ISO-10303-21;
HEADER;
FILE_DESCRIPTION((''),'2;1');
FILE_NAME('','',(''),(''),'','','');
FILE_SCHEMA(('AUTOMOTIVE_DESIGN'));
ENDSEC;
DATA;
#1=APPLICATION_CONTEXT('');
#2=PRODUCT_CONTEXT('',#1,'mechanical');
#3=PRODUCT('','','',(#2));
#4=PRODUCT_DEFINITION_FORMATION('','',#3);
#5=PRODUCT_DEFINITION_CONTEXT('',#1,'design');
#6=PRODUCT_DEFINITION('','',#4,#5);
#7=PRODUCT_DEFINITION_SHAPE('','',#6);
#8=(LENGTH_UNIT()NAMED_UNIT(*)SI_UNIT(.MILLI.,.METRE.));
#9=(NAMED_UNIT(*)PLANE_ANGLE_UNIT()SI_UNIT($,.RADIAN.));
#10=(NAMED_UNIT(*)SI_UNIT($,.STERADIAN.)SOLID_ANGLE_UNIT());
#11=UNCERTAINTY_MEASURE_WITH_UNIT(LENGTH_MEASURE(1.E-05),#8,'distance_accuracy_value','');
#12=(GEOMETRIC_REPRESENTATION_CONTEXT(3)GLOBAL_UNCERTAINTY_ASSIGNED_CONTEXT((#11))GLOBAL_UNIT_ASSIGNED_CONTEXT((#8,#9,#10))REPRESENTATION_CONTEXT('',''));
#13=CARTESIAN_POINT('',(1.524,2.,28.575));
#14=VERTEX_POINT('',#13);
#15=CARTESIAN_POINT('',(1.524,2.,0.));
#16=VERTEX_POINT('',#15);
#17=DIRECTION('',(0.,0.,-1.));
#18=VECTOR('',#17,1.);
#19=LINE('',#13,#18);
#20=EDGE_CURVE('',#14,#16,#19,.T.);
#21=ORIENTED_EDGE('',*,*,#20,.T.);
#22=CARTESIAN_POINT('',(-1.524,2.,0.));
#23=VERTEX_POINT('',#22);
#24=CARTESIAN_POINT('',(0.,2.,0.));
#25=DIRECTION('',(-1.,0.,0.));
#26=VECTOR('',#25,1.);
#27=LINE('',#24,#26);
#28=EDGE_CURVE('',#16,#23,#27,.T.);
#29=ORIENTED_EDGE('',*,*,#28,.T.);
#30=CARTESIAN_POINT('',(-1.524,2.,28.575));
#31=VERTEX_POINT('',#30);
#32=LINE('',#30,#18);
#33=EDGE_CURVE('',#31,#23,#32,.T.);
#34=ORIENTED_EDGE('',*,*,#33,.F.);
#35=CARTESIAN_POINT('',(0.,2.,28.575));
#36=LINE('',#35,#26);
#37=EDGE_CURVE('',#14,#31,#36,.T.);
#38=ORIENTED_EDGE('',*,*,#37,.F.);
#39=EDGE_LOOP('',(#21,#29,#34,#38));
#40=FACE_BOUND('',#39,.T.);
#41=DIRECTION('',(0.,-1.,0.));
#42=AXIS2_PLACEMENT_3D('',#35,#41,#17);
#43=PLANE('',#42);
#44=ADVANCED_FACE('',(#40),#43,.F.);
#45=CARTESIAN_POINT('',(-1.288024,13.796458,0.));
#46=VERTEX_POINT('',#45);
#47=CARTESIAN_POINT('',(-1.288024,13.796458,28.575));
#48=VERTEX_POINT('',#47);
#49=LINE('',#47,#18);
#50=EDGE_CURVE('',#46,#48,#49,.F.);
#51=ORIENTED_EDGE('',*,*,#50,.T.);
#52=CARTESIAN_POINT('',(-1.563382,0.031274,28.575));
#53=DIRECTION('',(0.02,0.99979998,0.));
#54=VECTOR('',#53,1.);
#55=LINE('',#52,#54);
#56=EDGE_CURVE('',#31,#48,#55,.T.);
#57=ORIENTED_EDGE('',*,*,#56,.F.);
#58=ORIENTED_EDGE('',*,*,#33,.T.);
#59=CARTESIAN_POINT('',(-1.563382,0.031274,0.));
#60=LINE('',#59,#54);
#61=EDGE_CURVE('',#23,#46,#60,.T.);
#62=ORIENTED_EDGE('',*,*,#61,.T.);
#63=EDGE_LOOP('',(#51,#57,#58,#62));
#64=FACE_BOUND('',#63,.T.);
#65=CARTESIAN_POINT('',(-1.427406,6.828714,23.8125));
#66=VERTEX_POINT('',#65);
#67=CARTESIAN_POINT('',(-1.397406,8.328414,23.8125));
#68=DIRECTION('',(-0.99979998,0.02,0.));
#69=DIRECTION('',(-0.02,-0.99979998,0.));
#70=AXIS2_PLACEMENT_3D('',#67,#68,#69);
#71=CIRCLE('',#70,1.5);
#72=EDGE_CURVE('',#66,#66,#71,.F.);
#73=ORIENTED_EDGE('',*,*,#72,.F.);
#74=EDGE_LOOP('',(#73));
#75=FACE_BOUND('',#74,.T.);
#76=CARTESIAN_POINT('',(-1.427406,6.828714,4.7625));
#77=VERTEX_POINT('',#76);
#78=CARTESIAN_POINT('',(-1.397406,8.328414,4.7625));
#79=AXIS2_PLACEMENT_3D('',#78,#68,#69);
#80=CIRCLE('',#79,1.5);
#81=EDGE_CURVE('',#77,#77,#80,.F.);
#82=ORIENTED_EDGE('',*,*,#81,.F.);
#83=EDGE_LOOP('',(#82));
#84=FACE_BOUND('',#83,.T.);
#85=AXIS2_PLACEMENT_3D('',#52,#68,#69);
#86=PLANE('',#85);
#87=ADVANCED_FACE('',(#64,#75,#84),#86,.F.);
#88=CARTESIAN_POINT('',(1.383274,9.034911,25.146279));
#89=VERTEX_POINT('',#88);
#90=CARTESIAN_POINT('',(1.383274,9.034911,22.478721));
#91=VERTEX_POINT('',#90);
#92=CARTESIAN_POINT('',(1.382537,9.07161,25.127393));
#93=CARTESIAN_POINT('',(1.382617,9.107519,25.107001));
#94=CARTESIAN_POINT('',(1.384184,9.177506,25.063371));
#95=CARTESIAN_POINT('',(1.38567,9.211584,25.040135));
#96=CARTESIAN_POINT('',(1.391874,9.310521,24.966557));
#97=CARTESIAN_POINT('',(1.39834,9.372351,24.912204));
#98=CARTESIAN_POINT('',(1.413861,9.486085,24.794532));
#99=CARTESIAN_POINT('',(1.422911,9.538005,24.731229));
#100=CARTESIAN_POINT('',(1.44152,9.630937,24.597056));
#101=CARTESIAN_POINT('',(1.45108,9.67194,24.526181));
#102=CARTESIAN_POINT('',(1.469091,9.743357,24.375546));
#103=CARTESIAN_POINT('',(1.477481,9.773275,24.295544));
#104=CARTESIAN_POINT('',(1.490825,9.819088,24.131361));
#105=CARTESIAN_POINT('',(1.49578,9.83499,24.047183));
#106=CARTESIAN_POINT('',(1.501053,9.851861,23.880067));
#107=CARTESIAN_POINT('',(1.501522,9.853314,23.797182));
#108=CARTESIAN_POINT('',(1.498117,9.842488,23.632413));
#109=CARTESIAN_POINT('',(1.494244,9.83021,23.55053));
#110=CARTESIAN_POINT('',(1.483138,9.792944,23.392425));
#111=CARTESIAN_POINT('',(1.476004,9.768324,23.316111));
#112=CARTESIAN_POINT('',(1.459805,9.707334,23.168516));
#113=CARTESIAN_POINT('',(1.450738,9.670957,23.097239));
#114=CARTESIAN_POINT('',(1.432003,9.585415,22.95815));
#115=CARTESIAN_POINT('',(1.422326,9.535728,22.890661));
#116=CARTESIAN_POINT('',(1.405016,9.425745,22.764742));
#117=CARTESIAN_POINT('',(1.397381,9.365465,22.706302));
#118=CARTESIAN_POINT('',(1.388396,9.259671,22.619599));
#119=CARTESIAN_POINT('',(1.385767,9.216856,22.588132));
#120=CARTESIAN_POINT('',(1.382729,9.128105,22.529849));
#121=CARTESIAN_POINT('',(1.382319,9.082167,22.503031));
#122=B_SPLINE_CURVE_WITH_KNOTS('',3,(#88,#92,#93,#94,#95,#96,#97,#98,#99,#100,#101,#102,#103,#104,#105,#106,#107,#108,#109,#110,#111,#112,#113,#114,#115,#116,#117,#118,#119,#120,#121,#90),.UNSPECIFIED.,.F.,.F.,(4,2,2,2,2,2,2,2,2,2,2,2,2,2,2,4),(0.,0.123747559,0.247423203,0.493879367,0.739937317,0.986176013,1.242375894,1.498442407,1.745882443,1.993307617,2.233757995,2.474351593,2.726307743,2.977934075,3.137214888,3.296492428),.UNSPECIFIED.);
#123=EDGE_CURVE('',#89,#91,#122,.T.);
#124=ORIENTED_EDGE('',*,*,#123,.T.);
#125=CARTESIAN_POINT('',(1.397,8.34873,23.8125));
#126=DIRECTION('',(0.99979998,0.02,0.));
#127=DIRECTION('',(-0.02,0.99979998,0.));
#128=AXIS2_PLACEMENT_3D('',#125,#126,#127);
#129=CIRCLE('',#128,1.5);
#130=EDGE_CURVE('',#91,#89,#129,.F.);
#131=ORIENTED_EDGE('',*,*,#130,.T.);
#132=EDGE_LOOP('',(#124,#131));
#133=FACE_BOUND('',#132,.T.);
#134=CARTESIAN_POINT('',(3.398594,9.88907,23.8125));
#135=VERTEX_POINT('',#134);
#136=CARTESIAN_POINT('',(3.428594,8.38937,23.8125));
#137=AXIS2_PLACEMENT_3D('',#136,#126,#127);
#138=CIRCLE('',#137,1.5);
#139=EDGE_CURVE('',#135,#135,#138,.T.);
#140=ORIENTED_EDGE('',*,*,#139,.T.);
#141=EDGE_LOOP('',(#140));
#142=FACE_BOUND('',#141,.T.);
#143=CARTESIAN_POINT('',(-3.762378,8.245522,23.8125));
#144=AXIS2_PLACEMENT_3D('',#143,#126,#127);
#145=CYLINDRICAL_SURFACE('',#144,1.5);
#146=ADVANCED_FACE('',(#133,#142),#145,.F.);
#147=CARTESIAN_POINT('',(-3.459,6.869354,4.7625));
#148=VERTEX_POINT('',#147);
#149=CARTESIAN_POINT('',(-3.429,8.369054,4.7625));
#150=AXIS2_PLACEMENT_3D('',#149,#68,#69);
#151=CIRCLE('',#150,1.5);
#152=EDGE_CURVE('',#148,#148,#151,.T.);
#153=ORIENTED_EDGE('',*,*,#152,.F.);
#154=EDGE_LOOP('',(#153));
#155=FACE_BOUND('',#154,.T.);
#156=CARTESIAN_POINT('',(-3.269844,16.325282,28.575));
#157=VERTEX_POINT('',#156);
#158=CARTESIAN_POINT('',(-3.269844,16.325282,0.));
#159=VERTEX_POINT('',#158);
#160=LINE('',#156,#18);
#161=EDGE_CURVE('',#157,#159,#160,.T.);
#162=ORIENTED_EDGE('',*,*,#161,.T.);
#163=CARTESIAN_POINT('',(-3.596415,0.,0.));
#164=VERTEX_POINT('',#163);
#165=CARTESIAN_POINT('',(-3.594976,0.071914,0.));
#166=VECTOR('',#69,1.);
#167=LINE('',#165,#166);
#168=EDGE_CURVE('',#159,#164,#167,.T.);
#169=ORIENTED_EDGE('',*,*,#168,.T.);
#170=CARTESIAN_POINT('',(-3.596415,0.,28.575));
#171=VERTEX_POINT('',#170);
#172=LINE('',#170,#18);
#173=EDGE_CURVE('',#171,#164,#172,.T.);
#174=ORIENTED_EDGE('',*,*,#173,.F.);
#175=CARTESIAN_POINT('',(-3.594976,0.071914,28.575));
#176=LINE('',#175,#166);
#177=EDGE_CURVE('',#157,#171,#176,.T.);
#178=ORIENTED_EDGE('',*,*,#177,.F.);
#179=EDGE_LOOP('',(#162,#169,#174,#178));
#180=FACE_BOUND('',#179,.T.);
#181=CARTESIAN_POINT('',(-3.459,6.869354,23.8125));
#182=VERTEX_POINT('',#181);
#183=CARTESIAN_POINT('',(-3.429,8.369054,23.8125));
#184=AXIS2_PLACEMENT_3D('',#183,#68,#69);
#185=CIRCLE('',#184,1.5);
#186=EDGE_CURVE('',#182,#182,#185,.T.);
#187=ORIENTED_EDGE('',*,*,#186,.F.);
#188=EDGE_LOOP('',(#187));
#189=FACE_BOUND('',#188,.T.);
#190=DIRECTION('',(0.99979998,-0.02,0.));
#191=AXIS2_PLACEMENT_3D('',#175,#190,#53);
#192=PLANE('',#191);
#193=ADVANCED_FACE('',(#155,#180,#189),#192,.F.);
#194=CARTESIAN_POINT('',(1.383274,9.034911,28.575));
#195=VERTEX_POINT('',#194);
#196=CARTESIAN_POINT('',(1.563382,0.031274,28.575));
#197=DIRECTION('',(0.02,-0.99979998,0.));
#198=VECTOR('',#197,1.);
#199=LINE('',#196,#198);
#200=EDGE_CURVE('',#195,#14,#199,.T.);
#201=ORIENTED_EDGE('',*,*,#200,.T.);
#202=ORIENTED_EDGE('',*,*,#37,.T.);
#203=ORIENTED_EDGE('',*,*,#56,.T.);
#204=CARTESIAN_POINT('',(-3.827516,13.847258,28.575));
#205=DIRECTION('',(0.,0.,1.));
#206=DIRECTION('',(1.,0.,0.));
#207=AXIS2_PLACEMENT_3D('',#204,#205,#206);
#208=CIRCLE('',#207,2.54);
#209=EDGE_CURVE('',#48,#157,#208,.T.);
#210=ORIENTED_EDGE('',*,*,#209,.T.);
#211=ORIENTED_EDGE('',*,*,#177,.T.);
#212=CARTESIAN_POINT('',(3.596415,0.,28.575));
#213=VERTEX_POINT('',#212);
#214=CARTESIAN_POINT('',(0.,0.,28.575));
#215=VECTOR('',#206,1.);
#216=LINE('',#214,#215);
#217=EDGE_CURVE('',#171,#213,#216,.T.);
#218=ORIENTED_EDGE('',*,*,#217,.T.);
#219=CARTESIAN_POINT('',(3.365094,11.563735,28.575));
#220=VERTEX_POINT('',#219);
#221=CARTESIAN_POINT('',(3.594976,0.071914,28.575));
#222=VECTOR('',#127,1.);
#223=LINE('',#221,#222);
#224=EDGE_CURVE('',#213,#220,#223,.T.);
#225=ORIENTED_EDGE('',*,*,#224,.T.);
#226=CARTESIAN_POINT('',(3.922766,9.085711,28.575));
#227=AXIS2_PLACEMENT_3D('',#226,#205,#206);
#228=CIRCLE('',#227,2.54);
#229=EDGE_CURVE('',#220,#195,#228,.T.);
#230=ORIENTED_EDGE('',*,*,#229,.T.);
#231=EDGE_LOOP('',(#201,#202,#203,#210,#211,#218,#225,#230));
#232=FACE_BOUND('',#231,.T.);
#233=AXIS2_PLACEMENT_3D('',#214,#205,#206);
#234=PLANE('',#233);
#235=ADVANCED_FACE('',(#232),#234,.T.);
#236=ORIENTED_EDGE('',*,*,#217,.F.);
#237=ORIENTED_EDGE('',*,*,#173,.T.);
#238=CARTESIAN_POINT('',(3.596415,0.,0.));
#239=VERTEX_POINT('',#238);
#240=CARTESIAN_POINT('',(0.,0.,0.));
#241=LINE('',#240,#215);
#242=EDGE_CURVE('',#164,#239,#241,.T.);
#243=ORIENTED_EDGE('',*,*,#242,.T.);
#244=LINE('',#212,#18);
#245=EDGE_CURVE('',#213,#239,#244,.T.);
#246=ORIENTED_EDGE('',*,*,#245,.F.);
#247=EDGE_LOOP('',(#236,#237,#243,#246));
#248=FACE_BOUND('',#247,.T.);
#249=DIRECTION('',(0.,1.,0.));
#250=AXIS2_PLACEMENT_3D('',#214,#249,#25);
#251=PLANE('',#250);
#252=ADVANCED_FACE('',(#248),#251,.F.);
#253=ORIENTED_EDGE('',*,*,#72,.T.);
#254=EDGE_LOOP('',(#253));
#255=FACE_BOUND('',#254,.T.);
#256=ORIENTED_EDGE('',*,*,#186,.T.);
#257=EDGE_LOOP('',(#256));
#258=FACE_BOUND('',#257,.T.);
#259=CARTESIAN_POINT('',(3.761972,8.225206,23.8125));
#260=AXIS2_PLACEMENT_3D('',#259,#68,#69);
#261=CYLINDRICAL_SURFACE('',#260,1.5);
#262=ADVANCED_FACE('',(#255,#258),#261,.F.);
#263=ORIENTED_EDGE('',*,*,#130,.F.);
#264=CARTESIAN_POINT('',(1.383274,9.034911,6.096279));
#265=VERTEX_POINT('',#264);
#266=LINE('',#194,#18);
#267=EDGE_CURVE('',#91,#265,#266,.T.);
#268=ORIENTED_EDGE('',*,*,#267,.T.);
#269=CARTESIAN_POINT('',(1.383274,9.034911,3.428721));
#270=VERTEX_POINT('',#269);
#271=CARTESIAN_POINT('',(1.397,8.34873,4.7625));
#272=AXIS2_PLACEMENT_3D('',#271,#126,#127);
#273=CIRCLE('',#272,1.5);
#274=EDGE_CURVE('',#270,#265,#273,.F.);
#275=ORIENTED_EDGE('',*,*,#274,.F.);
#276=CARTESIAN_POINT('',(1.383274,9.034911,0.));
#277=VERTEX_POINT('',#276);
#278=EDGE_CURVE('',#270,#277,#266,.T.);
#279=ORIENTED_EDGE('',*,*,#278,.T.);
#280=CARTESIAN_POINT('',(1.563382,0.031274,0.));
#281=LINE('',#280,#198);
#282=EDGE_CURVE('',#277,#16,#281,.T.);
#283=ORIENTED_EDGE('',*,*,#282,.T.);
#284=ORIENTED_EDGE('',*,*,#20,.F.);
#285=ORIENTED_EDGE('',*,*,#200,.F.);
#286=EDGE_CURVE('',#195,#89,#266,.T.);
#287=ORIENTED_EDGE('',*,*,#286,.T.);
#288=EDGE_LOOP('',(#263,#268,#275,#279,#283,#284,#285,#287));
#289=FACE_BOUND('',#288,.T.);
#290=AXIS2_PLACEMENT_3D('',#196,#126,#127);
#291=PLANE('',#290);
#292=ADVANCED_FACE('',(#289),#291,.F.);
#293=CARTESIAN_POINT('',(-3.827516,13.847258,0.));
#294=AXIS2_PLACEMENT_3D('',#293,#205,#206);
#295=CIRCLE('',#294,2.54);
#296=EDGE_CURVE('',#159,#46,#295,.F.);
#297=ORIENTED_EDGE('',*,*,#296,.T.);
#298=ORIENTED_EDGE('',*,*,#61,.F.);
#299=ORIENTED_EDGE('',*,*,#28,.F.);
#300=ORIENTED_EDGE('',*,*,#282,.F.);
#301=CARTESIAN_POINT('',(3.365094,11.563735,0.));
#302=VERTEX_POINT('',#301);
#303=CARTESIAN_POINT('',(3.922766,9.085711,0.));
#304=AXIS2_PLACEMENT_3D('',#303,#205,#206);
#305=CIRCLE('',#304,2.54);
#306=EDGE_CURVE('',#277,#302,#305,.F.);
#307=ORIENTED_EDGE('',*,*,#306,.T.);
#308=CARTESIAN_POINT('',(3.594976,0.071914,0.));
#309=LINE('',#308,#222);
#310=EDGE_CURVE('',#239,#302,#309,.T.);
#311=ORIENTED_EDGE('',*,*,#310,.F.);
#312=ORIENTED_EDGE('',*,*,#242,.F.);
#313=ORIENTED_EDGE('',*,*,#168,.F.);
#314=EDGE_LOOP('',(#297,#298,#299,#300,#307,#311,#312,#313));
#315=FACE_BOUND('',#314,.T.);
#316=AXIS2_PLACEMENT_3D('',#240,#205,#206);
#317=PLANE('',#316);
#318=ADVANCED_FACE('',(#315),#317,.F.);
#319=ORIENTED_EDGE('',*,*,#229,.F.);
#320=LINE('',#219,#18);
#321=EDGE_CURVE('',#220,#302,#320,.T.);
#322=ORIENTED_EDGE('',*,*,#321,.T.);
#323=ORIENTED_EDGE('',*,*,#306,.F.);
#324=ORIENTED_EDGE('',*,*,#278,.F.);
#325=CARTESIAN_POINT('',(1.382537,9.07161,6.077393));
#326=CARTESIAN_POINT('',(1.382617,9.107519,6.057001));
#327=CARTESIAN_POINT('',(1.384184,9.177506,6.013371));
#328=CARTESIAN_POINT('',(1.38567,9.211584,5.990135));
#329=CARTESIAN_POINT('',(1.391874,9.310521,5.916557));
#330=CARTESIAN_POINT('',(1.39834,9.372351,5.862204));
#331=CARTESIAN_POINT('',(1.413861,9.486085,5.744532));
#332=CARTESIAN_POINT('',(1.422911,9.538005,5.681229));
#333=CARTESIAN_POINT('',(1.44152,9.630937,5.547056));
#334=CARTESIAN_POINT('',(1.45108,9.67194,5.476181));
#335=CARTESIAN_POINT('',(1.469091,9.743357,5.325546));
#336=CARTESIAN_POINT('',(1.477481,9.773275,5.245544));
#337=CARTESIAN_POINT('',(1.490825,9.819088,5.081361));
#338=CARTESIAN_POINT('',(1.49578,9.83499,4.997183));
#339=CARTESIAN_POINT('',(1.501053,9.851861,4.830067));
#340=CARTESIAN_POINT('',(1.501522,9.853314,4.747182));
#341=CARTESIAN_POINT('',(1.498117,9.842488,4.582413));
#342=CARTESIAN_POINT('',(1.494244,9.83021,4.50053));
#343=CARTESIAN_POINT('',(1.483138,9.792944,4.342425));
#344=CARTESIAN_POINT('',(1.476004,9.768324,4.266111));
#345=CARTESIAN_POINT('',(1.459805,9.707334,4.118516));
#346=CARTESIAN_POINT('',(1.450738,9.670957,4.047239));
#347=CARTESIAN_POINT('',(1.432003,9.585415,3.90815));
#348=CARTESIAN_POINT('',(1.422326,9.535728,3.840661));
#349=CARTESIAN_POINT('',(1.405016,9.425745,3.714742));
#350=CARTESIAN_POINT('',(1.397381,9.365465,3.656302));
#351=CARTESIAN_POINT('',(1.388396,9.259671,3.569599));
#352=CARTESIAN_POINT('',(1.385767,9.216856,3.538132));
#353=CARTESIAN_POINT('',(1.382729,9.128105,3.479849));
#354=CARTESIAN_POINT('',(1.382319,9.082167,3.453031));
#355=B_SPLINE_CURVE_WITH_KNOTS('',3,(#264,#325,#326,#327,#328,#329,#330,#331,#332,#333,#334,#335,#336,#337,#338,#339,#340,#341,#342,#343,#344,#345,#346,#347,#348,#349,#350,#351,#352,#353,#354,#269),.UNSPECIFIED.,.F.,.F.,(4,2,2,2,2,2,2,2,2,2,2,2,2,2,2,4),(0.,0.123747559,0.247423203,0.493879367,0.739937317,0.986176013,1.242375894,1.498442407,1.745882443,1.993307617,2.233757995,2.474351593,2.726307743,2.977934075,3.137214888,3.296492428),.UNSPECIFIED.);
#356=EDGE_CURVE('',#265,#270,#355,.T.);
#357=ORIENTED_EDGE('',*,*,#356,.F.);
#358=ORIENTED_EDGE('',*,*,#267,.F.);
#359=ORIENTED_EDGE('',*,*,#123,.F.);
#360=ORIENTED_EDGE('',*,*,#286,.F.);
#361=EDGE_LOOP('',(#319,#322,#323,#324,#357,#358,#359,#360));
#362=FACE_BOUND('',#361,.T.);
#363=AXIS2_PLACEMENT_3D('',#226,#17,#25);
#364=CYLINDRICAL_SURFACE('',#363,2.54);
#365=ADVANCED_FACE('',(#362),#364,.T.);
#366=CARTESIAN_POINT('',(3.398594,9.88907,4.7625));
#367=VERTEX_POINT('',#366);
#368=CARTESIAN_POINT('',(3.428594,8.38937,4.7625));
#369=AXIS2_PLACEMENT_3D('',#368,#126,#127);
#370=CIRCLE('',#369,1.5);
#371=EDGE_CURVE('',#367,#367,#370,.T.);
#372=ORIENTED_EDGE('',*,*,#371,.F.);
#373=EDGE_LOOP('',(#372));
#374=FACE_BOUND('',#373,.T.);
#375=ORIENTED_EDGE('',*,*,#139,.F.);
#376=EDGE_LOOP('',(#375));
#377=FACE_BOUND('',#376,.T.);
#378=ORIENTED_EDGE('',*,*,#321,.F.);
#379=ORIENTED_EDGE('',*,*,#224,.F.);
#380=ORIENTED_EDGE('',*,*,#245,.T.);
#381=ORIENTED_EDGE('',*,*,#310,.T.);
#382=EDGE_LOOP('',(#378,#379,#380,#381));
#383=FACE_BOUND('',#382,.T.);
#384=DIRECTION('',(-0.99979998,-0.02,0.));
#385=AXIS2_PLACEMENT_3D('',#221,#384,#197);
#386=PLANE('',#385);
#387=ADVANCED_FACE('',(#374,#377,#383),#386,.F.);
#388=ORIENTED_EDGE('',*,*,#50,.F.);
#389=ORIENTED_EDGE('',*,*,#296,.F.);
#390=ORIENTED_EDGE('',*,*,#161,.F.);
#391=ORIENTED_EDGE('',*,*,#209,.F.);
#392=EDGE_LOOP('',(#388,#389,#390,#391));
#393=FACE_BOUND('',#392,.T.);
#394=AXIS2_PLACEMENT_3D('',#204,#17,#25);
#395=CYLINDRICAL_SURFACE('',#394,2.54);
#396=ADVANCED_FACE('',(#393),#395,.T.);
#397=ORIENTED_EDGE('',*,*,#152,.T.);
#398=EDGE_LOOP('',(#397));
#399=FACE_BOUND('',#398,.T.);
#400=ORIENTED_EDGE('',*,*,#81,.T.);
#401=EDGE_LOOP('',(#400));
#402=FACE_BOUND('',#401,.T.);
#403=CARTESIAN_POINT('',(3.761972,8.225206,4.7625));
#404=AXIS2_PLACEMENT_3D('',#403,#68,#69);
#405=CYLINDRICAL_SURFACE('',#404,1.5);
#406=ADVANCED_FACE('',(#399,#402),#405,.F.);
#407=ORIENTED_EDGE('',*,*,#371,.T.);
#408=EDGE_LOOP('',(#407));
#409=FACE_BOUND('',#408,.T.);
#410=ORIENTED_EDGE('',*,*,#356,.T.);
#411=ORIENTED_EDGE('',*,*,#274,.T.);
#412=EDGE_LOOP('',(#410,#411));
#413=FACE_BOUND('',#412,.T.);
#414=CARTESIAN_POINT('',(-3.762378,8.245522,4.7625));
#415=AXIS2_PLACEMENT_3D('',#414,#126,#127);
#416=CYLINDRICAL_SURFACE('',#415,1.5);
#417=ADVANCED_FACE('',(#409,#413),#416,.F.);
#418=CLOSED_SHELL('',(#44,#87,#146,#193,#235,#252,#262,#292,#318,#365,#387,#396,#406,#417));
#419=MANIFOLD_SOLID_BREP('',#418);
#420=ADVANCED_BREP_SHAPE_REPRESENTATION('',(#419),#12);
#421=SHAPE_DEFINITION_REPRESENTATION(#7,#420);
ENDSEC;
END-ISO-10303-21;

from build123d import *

# Parameters (mm, degrees)
BOSS_EXTRUDE1_DEPTH = 28.575
CUT_EXTRUDE1_REACH  = 35.651
SKETCH2_R           = 1.5
CUT_EXTRUDE2_REACH  = 35.651
SKETCH3_R           = 1.5
FILLET1_R           = 2.54


with BuildPart() as part:
    # Sketch1 → Boss-Extrude1 (new body)
    with BuildSketch(Plane.XY):
        Polygon((-1.3335, 11.523094809), (-3.365093559, 11.563734809), (-3.596414524, 0), (3.596414524, 0), (3.365093559, 11.563734809), (1.3335, 11.523094809), (1.524, 2), (-1.524, 2), align=None)
        Polygon((-1.23825, 16.284642214), (-1.3335, 11.523094809), (-3.365093559, 11.563734809), (-3.269843559, 16.325282214), align=None)
    extrude(amount=BOSS_EXTRUDE1_DEPTH)

    # Sketch2 → Cut-Extrude1 (cut, up to next)
    with BuildSketch(Plane(origin=(3.594975959, 0.071913903, 0), x_dir=(0, 0, -1), z_dir=(0.9997999799959991, 0.01999999999999963, 0)), mode=Mode.PRIVATE) as cut_extrude1_sk1:
        with Locations(Location((-23.8125, 8.31911996, 0), (0, 0, 90))):
            Circle(SKETCH2_R)
    cut_extrude1_tool1 = extrude(cut_extrude1_sk1.sketch, amount=-CUT_EXTRUDE1_REACH, mode=Mode.PRIVATE) & part.part
    # Sketch2 → Cut-Extrude1 (cut, up to next)
    with BuildSketch(Plane(origin=(3.594975959, 0.071913903, 0), x_dir=(0, 0, -1), z_dir=(0.9997999799959991, 0.01999999999999963, 0)), mode=Mode.PRIVATE) as cut_extrude1_sk2:
        with Locations(Location((-4.7625, 8.31911996, 0), (0, 0, 90))):
            Circle(SKETCH2_R)
    cut_extrude1_tool2 = extrude(cut_extrude1_sk2.sketch, amount=-CUT_EXTRUDE1_REACH, mode=Mode.PRIVATE) & part.part
    add(cut_extrude1_tool1.solids().sort_by_distance((3.428594, 8.38937, 23.8125))[0], mode=Mode.SUBTRACT)
    add(cut_extrude1_tool2.solids().sort_by_distance((3.428594, 8.38937, 4.7625))[0], mode=Mode.SUBTRACT)

    # Sketch3 → Cut-Extrude2 (cut, up to next)
    with BuildSketch(Plane(origin=(-3.594975959, 0.071913903, 0), x_dir=(0, 0, 1), z_dir=(-0.9997999799959991, 0.019999999999999622, 0)), mode=Mode.PRIVATE) as cut_extrude2_sk1:
        with Locations(Location((4.7625, 8.29879996, 0), (0, 0, 270))):
            Circle(SKETCH3_R)
    cut_extrude2_tool1 = extrude(cut_extrude2_sk1.sketch, amount=-CUT_EXTRUDE2_REACH, mode=Mode.PRIVATE) & part.part
    # Sketch3 → Cut-Extrude2 (cut, up to next)
    with BuildSketch(Plane(origin=(-3.594975959, 0.071913903, 0), x_dir=(0, 0, 1), z_dir=(-0.9997999799959991, 0.019999999999999622, 0)), mode=Mode.PRIVATE) as cut_extrude2_sk2:
        with Locations(Location((23.8125, 8.29879996, 0), (0, 0, 270))):
            Circle(SKETCH3_R)
    cut_extrude2_tool2 = extrude(cut_extrude2_sk2.sketch, amount=-CUT_EXTRUDE2_REACH, mode=Mode.PRIVATE) & part.part
    add(cut_extrude2_tool1.solids().sort_by_distance((-3.429, 8.369054, 4.7625))[0], mode=Mode.SUBTRACT)
    add(cut_extrude2_tool2.solids().sort_by_distance((-3.429, 8.369054, 23.8125))[0], mode=Mode.SUBTRACT)

    # Fillet1
    # the kernel refuses this fillet: 2.54 mm, written as the material it takes off along each edge
    with BuildSketch(Plane(origin=(1.3335, 11.523094809, -6.221703947), x_dir=(0.9997999799960309, 0.019999999998416385, 0), z_dir=(0, 0, 1))) as fillet1_piece_1:
        with BuildLine():
            CenterArc((2.54, -2.488681579), FILLET1_R, 101.536959033, 78.463040967)
            Line((0, -2.488681579), (-0.0508, -2.488681579))
            Line((-0.0508, -2.488681579), (-0.0508, 0))
            Line((-0.0508, 0), (0, 0.0508))
            ThreePointArc((0, 0.0508), (1.016, 0.0508), (2.02184, 0.049773632))
            Line((2.02184, 0.049773632), (2.032, 0))
        make_face()
    extrude(amount=41.018407893, mode=Mode.SUBTRACT)
    with BuildSketch(Plane(origin=(-1.23825, 16.284642214, -6.221703947), x_dir=(-0.9997999799960307, 0.019999999998425156, 0), z_dir=(0, 0, 1))) as fillet1_piece_2:
        with BuildLine():
            CenterArc((2.54, 2.488681579), FILLET1_R, 180, 78.463040967)
            Line((0, 2.488681579), (-0.0508, 2.488681579))
            Line((-0.0508, 2.488681579), (-0.0508, 0))
            Line((-0.0508, 0), (0, -0.0508))
            ThreePointArc((0, -0.0508), (1.016, -0.0508), (2.02184, -0.049773632))
            Line((2.02184, -0.049773632), (2.032, 0))
        make_face()
    extrude(amount=41.018407893, mode=Mode.SUBTRACT)


solid = part.part
